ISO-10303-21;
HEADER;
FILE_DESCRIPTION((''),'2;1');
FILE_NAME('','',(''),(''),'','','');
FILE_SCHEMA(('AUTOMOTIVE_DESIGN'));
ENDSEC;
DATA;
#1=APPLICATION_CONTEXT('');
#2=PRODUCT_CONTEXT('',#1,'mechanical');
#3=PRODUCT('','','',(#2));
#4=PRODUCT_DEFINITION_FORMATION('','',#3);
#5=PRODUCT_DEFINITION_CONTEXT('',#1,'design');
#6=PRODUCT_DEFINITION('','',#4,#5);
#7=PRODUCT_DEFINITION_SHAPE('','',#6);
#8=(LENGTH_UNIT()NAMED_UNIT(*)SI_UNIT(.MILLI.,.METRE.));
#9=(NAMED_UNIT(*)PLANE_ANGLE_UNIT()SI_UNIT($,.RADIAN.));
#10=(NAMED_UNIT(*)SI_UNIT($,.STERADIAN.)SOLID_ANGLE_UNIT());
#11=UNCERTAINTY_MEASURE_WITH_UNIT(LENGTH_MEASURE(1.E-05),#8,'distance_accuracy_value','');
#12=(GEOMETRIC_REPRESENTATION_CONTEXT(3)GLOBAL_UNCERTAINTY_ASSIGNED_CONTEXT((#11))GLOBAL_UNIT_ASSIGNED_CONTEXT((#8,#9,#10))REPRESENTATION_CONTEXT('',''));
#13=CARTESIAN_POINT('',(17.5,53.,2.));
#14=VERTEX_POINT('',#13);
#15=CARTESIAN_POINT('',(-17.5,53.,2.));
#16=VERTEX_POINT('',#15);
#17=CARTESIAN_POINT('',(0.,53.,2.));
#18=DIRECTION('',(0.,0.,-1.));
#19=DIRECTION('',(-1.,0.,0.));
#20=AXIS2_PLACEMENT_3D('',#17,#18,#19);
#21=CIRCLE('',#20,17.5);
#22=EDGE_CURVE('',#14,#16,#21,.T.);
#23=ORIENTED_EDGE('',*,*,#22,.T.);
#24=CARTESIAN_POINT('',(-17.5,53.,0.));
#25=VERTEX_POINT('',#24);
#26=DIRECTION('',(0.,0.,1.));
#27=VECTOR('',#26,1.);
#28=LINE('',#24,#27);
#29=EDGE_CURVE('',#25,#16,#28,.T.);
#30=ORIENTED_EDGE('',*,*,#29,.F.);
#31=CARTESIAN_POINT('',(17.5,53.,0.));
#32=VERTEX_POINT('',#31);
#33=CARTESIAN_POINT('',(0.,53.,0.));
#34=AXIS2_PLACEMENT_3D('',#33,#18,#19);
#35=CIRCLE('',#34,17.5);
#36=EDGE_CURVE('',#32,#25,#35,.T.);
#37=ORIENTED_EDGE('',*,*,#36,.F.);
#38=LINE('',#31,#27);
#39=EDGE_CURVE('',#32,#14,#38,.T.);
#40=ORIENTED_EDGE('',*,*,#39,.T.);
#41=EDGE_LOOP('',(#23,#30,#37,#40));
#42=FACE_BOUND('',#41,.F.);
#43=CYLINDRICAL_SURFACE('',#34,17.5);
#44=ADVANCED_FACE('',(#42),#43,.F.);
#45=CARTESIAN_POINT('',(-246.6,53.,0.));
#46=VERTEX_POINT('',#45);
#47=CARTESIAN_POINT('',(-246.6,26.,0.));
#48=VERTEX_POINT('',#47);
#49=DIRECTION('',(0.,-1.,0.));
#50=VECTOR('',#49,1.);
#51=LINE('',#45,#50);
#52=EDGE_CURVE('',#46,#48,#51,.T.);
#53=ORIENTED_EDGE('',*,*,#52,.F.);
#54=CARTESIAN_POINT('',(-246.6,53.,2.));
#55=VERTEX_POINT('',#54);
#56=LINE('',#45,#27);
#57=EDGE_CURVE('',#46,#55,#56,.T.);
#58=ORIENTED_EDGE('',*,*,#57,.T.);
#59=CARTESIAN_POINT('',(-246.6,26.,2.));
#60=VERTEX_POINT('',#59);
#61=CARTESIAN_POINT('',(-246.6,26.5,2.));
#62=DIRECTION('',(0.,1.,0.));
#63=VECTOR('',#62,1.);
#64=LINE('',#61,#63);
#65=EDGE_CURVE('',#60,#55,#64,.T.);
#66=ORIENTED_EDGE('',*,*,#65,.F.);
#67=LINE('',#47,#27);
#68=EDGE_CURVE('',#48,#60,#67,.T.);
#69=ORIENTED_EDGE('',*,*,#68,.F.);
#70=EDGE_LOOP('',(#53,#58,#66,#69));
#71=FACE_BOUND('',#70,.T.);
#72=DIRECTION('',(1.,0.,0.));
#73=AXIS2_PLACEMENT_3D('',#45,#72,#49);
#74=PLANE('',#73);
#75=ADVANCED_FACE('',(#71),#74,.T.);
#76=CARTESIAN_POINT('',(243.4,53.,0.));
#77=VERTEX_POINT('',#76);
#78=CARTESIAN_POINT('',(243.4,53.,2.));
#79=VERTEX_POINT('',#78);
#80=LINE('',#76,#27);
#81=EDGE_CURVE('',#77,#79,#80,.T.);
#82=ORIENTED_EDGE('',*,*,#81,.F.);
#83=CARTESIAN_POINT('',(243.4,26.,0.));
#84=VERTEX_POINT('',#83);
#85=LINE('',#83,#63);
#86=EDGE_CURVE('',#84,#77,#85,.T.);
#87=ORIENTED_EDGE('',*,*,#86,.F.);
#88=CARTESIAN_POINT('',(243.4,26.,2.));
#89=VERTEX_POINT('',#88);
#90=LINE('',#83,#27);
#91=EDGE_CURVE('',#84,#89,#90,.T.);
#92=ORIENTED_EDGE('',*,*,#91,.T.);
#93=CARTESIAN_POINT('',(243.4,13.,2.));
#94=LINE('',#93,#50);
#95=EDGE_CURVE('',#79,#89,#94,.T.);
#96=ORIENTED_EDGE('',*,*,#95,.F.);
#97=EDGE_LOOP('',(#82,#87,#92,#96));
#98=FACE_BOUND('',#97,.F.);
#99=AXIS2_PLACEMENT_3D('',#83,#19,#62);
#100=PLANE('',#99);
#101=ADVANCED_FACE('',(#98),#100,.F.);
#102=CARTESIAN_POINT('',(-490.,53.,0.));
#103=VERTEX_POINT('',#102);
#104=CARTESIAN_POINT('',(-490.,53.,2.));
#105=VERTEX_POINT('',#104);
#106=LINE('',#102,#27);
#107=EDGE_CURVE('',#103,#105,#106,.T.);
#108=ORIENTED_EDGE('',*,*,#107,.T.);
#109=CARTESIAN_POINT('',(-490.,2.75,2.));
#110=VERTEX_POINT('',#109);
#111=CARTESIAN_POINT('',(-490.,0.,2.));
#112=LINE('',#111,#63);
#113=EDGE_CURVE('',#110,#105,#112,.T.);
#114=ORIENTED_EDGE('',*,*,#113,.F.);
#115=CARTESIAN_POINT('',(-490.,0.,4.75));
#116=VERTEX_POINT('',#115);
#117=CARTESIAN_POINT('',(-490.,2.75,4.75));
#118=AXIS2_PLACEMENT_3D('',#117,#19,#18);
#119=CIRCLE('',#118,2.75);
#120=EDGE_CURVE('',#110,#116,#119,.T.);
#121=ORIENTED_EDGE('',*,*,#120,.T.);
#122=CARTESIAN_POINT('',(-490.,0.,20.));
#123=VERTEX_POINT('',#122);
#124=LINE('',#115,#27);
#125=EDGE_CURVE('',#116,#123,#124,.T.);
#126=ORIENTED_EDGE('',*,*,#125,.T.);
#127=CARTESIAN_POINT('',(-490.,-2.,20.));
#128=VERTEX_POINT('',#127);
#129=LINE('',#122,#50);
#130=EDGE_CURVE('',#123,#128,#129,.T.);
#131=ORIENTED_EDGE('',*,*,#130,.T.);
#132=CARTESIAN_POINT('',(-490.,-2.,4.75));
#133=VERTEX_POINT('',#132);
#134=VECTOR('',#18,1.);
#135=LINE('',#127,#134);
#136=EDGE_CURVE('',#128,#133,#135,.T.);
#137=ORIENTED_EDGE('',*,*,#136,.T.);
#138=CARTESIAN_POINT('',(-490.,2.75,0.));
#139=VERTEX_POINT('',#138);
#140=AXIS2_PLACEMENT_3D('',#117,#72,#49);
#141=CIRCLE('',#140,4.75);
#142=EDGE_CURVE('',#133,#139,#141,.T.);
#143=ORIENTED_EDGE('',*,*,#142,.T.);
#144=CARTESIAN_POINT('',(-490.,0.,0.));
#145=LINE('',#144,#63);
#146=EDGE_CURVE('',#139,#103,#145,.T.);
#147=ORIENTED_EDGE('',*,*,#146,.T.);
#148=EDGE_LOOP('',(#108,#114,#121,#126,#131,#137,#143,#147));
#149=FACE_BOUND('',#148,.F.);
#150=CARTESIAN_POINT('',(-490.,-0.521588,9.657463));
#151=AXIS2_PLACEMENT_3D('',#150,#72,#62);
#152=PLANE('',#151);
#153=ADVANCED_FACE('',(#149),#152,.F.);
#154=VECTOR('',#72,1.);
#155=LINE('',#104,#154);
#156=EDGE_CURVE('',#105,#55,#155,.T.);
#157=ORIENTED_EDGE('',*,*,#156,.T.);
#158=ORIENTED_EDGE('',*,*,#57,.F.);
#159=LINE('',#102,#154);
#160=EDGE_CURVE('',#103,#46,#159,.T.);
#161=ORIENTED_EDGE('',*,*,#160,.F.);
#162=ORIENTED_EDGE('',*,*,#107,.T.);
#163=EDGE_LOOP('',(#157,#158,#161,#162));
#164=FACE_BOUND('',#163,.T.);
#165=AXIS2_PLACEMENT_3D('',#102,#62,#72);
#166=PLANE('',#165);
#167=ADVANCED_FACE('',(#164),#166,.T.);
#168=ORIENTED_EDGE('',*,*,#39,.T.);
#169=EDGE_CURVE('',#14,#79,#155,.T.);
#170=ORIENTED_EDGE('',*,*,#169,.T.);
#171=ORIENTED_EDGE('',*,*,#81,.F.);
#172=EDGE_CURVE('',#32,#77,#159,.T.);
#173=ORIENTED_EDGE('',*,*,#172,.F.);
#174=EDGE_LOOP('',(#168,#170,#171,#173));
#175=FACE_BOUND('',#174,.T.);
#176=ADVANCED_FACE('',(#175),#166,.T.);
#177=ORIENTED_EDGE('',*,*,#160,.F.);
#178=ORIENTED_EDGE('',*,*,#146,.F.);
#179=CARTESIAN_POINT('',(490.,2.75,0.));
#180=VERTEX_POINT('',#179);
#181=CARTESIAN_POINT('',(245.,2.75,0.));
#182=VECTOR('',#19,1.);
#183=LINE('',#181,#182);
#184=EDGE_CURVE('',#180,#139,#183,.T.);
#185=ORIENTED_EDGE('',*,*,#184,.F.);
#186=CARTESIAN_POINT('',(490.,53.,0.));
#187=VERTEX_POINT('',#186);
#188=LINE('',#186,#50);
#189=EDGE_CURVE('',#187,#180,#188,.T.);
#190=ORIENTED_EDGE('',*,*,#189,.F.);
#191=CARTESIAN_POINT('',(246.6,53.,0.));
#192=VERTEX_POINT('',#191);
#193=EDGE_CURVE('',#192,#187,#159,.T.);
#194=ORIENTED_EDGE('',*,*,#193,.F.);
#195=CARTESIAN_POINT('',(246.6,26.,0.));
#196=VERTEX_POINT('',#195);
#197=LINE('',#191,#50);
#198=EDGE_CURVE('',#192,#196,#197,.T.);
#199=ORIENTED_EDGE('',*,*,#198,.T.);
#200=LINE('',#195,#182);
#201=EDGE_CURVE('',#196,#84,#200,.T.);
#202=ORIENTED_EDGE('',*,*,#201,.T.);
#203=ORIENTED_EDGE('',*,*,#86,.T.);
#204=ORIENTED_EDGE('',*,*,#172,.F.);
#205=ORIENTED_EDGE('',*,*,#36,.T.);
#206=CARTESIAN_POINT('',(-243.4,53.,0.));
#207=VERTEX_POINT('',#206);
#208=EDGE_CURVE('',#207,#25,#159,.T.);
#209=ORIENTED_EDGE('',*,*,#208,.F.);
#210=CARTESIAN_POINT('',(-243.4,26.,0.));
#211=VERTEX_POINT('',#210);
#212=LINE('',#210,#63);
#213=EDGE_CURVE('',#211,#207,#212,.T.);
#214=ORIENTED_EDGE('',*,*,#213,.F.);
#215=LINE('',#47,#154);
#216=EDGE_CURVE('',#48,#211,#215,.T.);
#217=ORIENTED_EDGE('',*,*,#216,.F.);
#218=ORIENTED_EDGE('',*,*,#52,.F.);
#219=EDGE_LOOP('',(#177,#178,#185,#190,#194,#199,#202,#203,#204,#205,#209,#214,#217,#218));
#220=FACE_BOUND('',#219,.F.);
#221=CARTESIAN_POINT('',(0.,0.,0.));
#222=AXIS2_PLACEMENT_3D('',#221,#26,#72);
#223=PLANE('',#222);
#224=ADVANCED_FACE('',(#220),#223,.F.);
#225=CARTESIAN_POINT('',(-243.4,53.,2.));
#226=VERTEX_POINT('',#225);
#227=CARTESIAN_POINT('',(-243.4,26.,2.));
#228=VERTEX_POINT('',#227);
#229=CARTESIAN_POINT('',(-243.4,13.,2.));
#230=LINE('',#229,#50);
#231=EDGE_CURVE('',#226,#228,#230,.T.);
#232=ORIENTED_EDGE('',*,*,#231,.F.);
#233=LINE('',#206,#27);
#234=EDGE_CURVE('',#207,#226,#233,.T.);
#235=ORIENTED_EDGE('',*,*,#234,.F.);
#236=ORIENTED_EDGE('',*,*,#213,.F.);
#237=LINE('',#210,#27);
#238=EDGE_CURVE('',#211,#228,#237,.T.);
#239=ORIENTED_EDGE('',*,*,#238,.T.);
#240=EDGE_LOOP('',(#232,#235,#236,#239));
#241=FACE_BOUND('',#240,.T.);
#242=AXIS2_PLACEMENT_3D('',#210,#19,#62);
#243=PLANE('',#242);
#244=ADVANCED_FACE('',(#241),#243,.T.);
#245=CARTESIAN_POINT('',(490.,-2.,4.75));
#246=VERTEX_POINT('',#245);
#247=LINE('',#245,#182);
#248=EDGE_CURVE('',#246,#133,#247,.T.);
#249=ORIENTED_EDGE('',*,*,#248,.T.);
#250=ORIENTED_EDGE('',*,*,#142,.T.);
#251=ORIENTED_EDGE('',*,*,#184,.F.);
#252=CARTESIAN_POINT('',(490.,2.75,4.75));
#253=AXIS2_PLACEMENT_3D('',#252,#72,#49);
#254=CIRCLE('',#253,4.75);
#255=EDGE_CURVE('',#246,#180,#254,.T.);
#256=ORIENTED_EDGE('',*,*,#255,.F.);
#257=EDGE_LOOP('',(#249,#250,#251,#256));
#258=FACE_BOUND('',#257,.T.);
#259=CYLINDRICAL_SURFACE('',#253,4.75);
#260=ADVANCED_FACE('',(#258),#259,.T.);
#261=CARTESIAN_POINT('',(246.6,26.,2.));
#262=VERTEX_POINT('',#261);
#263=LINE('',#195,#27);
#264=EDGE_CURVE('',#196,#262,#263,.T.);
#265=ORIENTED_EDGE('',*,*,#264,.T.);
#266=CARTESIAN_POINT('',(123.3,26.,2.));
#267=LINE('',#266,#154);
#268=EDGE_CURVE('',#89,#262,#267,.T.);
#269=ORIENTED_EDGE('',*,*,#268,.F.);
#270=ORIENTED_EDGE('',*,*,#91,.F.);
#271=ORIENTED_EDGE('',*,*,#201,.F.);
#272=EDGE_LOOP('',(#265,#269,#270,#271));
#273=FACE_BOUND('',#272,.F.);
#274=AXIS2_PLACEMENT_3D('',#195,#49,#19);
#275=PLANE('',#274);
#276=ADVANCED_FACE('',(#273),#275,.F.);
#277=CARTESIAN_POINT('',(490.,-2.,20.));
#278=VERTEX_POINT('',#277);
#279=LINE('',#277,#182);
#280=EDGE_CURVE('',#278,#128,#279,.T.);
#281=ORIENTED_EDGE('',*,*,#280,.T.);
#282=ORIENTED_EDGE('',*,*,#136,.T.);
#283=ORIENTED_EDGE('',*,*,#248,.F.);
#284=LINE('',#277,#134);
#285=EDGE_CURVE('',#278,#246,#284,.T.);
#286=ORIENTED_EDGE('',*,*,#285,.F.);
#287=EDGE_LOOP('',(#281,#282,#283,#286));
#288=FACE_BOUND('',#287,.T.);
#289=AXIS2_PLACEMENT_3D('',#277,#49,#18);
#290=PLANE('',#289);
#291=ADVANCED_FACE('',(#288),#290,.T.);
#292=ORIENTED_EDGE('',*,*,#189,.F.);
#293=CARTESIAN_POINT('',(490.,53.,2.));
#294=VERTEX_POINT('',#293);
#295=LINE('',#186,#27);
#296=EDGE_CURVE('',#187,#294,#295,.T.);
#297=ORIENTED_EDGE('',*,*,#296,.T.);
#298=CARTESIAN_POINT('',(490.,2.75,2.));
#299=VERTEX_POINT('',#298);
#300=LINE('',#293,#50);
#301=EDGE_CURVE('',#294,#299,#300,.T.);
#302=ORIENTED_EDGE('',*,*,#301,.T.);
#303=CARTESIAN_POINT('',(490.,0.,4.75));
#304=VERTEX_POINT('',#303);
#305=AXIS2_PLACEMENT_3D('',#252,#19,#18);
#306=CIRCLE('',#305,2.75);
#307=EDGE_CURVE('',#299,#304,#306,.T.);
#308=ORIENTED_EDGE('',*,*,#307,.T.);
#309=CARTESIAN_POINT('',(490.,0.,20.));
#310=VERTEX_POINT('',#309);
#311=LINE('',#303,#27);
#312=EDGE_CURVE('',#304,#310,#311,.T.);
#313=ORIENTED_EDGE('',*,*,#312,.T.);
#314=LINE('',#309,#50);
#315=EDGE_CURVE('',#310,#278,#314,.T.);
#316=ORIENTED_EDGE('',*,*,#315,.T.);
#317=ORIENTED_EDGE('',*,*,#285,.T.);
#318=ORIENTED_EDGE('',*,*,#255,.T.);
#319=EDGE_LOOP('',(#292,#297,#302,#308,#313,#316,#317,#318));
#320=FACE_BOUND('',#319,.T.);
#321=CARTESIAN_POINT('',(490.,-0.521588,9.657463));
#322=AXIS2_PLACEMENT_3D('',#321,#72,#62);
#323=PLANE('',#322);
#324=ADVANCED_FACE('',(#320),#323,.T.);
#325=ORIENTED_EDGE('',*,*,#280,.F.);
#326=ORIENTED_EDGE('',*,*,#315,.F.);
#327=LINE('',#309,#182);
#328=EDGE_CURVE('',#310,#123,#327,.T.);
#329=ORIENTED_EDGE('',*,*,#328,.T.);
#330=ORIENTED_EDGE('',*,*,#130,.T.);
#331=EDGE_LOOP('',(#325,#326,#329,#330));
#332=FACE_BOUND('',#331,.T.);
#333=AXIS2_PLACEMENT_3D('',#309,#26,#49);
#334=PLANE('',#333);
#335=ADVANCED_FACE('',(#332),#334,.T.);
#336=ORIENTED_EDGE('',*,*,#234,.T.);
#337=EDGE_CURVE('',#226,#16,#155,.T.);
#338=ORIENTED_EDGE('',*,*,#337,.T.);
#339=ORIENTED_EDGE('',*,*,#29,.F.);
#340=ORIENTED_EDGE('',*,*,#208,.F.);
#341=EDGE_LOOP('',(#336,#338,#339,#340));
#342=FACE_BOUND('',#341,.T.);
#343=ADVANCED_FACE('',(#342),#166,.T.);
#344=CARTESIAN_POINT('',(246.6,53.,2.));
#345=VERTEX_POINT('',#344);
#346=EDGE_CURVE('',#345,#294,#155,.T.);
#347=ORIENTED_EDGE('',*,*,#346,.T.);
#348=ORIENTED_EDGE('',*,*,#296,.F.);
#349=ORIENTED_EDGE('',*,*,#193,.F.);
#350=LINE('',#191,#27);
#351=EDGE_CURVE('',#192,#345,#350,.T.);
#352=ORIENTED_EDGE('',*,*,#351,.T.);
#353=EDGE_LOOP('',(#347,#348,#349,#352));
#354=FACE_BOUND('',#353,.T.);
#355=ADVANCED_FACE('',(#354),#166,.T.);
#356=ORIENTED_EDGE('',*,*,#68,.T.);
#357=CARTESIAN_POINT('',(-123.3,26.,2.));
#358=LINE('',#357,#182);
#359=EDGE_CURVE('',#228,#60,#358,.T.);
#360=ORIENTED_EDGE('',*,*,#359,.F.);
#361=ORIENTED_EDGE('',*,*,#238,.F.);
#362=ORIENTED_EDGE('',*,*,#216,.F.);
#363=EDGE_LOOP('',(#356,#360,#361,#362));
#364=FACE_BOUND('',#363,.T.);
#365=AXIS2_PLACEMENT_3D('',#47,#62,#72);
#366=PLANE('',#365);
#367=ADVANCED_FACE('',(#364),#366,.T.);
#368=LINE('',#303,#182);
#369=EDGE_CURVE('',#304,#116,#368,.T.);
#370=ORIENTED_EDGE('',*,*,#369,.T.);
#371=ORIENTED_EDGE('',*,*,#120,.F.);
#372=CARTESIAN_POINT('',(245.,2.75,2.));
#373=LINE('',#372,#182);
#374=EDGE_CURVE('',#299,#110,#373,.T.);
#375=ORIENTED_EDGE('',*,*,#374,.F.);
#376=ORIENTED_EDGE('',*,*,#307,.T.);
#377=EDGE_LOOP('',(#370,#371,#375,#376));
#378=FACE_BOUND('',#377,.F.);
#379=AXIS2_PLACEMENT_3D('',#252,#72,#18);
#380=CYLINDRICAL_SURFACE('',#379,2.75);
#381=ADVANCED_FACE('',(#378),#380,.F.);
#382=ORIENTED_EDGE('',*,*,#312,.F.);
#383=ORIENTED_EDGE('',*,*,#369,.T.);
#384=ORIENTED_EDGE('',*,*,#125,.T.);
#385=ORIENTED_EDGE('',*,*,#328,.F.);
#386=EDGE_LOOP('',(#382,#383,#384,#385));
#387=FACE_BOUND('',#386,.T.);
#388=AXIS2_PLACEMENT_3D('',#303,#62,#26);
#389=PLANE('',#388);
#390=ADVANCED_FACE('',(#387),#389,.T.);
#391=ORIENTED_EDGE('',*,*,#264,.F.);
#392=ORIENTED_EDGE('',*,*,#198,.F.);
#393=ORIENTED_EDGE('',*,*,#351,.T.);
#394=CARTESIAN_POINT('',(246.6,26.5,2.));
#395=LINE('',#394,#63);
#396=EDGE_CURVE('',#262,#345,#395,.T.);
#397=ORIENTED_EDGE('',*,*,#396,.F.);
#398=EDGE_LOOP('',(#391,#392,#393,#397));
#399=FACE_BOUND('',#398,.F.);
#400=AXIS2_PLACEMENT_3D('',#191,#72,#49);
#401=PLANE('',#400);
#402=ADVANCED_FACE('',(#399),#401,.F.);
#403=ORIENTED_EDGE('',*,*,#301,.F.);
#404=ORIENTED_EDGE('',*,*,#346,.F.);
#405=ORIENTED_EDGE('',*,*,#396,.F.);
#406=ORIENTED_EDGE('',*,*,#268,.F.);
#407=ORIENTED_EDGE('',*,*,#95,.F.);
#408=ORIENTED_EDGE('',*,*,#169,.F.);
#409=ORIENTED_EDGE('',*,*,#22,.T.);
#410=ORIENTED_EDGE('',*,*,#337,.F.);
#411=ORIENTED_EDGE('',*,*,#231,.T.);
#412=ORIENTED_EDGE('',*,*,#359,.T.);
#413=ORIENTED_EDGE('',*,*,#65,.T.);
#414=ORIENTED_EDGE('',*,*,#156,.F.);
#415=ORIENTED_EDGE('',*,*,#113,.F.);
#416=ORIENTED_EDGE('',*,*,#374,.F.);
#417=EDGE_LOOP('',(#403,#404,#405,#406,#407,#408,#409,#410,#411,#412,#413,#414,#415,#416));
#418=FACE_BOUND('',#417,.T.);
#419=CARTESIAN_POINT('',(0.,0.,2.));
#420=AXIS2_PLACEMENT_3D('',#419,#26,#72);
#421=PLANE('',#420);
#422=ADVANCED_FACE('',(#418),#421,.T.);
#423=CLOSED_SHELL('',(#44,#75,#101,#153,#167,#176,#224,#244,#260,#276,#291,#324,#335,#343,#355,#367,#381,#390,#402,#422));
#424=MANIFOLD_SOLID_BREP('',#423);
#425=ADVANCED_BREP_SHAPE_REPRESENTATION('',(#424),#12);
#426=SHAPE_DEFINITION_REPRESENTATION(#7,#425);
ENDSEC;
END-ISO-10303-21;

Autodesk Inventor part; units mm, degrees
ref_plane "YZ Plane" through (0, 0, 0) normal (1, 0, 0) x (0, 1, 0)
ref_plane "XZ Plane" through (0, 0, 0) normal (0, 1, 0) x (-1, 0, 0)
ref_plane "XY Plane" through (0, 0, 0) normal (0, 0, 1) x (1, 0, 0)
sketch "Sketch1" plane through (0, 0, 0) normal (0, 0, 1) x (1, 0, 0)
  line L0 (-490, 53) -> (490, 53)
  line L1 (490, 53) -> (490, 0)
  line L2 (490, 0) -> (-490, 0)
  line L3 (-490, 0) -> (-490, 53)
  point P0 (0, 0)
  point P1 (0, 0)
  dimension "d0" = 980
  dimension "d1" = 53
extrude "Plate1" add sketch "Sketch1" along normal blind 2
sketch "Sketch2" plane through (490, -2, 0) normal (0, 1, 0) x (-1, 0, 0)
  line L0 (980, 0) -> (0, 0)
  line L1 (0, 0) -> (0, 20)
  line L2 (0, 20) -> (980, 20)
  line L3 (980, 20) -> (980, 0)
edge flange "Flange1" height 20 angle 90 thickness 2 bend radius 2.75 thickness toward (0, 1, 0) relief round relief width 2 relief depth 1 edges at (0, 0, 2) wall of the first edge with corners at (-490, -2, 0) (490, -2, 0) (490, -2, 20) (-490, -2, 20)
bend "Bend1"
corner "Corner1"
sketch "Sketch5" plane through (0, 0, 0) normal (0, 0, -1) x (-1, 0, 0)
  line L0 (490, 53) -> (-490, 53) projected
  line L1 (490, -2) -> (-490, -2) projected
  circle A0 centre (0, 53) radius 17.5
  line L2 (243.4, 53) -> (246.6, 53)
  line L3 (246.6, 53) -> (246.6, 26)
  line L4 (246.6, 26) -> (243.4, 26)
  line L5 (243.4, 26) -> (243.4, 53)
  line L6 (-243.4, 53) -> (-246.6, 53)
  line L7 (-246.6, 53) -> (-246.6, 26)
  line L8 (-246.6, 26) -> (-243.4, 26)
  line L9 (-243.4, 26) -> (-243.4, 53)
  line L10 (0, 53) -> (0, -2) construction
  point P0 (0, 0)
  point P1 (-490, -2)
  point P2 (245, 26)
  point P3 (-245, 26)
  point P4 (246.6, 53)
  point P5 (-17.5, 53)
  point P6 (17.5, 53)
  point P7 (-246.6, 53)
  dimension "d45" = 35
  dimension "d48" = 3.2
  dimension "d49" = 490
  dimension "d51" = 28
  dimension "d52" = 27
extrude "Extrusion1" cut sketch "Sketch5" against normal through all contours L3 L4 L5 L0 | L9 L8 L7 L0 | A0 L0 picked at (-2.238, 46.1497)
sketch "Sketch9" plane through (0, 0, 2) normal (0, 0, 1) x (1, 0, 0)
  line L0 (485.6141, 29.596) -> (485.6141, 17.596) construction
  line L1 (485.6141, 17.596) -> (285.6141, 17.596) construction
  line L2 (285.6141, 17.596) -> (285.6141, 29.596) construction
  line L3 (285.6141, 29.596) -> (485.6141, 29.596) construction
  line L4 (-490, 53) -> (490, 53) projected
  point P0 (0, 0)
  point P1 (1.05, 68)
  point P2 (490, 53)
  dimension "d40" = 200
  dimension "d41" = 12
mark "Mark2"
equation "\"d2\" = Thickness"
equation "\"d3\" = BendReliefWidth"
equation "\"d4\" = BendReliefDepth"
equation "\"d5\" = MinimumRemnant"
equation "\"d6\" = TransitionRadius"
equation "\"d9\" = BendRadius"
equation "\"d10\" = CornerReliefSize"
equation "\"d11\" = GapSize"
equation "\"d12\" = JacobiRadiusSize"
equation "\"BendReliefWidth\" = Thickness"
equation "\"BendReliefDepth\" = 0.5 * Thickness"
equation "\"CornerReliefSize\" = 4 * Thickness"
equation "\"MinimumRemnant\" = 2 * Thickness"
equation "\"TransitionRadius\" = BendRadius"
equation "\"JacobiRadiusSize\" = BendRadius"
equation "\"GapSize\" = Thickness"
equation "\"Thickness\" = 2"
equation "\"BendRadius\" = 2.75"
properties part number "MSC 343 stringer BOARD  ###" material "Stainless Steel"
